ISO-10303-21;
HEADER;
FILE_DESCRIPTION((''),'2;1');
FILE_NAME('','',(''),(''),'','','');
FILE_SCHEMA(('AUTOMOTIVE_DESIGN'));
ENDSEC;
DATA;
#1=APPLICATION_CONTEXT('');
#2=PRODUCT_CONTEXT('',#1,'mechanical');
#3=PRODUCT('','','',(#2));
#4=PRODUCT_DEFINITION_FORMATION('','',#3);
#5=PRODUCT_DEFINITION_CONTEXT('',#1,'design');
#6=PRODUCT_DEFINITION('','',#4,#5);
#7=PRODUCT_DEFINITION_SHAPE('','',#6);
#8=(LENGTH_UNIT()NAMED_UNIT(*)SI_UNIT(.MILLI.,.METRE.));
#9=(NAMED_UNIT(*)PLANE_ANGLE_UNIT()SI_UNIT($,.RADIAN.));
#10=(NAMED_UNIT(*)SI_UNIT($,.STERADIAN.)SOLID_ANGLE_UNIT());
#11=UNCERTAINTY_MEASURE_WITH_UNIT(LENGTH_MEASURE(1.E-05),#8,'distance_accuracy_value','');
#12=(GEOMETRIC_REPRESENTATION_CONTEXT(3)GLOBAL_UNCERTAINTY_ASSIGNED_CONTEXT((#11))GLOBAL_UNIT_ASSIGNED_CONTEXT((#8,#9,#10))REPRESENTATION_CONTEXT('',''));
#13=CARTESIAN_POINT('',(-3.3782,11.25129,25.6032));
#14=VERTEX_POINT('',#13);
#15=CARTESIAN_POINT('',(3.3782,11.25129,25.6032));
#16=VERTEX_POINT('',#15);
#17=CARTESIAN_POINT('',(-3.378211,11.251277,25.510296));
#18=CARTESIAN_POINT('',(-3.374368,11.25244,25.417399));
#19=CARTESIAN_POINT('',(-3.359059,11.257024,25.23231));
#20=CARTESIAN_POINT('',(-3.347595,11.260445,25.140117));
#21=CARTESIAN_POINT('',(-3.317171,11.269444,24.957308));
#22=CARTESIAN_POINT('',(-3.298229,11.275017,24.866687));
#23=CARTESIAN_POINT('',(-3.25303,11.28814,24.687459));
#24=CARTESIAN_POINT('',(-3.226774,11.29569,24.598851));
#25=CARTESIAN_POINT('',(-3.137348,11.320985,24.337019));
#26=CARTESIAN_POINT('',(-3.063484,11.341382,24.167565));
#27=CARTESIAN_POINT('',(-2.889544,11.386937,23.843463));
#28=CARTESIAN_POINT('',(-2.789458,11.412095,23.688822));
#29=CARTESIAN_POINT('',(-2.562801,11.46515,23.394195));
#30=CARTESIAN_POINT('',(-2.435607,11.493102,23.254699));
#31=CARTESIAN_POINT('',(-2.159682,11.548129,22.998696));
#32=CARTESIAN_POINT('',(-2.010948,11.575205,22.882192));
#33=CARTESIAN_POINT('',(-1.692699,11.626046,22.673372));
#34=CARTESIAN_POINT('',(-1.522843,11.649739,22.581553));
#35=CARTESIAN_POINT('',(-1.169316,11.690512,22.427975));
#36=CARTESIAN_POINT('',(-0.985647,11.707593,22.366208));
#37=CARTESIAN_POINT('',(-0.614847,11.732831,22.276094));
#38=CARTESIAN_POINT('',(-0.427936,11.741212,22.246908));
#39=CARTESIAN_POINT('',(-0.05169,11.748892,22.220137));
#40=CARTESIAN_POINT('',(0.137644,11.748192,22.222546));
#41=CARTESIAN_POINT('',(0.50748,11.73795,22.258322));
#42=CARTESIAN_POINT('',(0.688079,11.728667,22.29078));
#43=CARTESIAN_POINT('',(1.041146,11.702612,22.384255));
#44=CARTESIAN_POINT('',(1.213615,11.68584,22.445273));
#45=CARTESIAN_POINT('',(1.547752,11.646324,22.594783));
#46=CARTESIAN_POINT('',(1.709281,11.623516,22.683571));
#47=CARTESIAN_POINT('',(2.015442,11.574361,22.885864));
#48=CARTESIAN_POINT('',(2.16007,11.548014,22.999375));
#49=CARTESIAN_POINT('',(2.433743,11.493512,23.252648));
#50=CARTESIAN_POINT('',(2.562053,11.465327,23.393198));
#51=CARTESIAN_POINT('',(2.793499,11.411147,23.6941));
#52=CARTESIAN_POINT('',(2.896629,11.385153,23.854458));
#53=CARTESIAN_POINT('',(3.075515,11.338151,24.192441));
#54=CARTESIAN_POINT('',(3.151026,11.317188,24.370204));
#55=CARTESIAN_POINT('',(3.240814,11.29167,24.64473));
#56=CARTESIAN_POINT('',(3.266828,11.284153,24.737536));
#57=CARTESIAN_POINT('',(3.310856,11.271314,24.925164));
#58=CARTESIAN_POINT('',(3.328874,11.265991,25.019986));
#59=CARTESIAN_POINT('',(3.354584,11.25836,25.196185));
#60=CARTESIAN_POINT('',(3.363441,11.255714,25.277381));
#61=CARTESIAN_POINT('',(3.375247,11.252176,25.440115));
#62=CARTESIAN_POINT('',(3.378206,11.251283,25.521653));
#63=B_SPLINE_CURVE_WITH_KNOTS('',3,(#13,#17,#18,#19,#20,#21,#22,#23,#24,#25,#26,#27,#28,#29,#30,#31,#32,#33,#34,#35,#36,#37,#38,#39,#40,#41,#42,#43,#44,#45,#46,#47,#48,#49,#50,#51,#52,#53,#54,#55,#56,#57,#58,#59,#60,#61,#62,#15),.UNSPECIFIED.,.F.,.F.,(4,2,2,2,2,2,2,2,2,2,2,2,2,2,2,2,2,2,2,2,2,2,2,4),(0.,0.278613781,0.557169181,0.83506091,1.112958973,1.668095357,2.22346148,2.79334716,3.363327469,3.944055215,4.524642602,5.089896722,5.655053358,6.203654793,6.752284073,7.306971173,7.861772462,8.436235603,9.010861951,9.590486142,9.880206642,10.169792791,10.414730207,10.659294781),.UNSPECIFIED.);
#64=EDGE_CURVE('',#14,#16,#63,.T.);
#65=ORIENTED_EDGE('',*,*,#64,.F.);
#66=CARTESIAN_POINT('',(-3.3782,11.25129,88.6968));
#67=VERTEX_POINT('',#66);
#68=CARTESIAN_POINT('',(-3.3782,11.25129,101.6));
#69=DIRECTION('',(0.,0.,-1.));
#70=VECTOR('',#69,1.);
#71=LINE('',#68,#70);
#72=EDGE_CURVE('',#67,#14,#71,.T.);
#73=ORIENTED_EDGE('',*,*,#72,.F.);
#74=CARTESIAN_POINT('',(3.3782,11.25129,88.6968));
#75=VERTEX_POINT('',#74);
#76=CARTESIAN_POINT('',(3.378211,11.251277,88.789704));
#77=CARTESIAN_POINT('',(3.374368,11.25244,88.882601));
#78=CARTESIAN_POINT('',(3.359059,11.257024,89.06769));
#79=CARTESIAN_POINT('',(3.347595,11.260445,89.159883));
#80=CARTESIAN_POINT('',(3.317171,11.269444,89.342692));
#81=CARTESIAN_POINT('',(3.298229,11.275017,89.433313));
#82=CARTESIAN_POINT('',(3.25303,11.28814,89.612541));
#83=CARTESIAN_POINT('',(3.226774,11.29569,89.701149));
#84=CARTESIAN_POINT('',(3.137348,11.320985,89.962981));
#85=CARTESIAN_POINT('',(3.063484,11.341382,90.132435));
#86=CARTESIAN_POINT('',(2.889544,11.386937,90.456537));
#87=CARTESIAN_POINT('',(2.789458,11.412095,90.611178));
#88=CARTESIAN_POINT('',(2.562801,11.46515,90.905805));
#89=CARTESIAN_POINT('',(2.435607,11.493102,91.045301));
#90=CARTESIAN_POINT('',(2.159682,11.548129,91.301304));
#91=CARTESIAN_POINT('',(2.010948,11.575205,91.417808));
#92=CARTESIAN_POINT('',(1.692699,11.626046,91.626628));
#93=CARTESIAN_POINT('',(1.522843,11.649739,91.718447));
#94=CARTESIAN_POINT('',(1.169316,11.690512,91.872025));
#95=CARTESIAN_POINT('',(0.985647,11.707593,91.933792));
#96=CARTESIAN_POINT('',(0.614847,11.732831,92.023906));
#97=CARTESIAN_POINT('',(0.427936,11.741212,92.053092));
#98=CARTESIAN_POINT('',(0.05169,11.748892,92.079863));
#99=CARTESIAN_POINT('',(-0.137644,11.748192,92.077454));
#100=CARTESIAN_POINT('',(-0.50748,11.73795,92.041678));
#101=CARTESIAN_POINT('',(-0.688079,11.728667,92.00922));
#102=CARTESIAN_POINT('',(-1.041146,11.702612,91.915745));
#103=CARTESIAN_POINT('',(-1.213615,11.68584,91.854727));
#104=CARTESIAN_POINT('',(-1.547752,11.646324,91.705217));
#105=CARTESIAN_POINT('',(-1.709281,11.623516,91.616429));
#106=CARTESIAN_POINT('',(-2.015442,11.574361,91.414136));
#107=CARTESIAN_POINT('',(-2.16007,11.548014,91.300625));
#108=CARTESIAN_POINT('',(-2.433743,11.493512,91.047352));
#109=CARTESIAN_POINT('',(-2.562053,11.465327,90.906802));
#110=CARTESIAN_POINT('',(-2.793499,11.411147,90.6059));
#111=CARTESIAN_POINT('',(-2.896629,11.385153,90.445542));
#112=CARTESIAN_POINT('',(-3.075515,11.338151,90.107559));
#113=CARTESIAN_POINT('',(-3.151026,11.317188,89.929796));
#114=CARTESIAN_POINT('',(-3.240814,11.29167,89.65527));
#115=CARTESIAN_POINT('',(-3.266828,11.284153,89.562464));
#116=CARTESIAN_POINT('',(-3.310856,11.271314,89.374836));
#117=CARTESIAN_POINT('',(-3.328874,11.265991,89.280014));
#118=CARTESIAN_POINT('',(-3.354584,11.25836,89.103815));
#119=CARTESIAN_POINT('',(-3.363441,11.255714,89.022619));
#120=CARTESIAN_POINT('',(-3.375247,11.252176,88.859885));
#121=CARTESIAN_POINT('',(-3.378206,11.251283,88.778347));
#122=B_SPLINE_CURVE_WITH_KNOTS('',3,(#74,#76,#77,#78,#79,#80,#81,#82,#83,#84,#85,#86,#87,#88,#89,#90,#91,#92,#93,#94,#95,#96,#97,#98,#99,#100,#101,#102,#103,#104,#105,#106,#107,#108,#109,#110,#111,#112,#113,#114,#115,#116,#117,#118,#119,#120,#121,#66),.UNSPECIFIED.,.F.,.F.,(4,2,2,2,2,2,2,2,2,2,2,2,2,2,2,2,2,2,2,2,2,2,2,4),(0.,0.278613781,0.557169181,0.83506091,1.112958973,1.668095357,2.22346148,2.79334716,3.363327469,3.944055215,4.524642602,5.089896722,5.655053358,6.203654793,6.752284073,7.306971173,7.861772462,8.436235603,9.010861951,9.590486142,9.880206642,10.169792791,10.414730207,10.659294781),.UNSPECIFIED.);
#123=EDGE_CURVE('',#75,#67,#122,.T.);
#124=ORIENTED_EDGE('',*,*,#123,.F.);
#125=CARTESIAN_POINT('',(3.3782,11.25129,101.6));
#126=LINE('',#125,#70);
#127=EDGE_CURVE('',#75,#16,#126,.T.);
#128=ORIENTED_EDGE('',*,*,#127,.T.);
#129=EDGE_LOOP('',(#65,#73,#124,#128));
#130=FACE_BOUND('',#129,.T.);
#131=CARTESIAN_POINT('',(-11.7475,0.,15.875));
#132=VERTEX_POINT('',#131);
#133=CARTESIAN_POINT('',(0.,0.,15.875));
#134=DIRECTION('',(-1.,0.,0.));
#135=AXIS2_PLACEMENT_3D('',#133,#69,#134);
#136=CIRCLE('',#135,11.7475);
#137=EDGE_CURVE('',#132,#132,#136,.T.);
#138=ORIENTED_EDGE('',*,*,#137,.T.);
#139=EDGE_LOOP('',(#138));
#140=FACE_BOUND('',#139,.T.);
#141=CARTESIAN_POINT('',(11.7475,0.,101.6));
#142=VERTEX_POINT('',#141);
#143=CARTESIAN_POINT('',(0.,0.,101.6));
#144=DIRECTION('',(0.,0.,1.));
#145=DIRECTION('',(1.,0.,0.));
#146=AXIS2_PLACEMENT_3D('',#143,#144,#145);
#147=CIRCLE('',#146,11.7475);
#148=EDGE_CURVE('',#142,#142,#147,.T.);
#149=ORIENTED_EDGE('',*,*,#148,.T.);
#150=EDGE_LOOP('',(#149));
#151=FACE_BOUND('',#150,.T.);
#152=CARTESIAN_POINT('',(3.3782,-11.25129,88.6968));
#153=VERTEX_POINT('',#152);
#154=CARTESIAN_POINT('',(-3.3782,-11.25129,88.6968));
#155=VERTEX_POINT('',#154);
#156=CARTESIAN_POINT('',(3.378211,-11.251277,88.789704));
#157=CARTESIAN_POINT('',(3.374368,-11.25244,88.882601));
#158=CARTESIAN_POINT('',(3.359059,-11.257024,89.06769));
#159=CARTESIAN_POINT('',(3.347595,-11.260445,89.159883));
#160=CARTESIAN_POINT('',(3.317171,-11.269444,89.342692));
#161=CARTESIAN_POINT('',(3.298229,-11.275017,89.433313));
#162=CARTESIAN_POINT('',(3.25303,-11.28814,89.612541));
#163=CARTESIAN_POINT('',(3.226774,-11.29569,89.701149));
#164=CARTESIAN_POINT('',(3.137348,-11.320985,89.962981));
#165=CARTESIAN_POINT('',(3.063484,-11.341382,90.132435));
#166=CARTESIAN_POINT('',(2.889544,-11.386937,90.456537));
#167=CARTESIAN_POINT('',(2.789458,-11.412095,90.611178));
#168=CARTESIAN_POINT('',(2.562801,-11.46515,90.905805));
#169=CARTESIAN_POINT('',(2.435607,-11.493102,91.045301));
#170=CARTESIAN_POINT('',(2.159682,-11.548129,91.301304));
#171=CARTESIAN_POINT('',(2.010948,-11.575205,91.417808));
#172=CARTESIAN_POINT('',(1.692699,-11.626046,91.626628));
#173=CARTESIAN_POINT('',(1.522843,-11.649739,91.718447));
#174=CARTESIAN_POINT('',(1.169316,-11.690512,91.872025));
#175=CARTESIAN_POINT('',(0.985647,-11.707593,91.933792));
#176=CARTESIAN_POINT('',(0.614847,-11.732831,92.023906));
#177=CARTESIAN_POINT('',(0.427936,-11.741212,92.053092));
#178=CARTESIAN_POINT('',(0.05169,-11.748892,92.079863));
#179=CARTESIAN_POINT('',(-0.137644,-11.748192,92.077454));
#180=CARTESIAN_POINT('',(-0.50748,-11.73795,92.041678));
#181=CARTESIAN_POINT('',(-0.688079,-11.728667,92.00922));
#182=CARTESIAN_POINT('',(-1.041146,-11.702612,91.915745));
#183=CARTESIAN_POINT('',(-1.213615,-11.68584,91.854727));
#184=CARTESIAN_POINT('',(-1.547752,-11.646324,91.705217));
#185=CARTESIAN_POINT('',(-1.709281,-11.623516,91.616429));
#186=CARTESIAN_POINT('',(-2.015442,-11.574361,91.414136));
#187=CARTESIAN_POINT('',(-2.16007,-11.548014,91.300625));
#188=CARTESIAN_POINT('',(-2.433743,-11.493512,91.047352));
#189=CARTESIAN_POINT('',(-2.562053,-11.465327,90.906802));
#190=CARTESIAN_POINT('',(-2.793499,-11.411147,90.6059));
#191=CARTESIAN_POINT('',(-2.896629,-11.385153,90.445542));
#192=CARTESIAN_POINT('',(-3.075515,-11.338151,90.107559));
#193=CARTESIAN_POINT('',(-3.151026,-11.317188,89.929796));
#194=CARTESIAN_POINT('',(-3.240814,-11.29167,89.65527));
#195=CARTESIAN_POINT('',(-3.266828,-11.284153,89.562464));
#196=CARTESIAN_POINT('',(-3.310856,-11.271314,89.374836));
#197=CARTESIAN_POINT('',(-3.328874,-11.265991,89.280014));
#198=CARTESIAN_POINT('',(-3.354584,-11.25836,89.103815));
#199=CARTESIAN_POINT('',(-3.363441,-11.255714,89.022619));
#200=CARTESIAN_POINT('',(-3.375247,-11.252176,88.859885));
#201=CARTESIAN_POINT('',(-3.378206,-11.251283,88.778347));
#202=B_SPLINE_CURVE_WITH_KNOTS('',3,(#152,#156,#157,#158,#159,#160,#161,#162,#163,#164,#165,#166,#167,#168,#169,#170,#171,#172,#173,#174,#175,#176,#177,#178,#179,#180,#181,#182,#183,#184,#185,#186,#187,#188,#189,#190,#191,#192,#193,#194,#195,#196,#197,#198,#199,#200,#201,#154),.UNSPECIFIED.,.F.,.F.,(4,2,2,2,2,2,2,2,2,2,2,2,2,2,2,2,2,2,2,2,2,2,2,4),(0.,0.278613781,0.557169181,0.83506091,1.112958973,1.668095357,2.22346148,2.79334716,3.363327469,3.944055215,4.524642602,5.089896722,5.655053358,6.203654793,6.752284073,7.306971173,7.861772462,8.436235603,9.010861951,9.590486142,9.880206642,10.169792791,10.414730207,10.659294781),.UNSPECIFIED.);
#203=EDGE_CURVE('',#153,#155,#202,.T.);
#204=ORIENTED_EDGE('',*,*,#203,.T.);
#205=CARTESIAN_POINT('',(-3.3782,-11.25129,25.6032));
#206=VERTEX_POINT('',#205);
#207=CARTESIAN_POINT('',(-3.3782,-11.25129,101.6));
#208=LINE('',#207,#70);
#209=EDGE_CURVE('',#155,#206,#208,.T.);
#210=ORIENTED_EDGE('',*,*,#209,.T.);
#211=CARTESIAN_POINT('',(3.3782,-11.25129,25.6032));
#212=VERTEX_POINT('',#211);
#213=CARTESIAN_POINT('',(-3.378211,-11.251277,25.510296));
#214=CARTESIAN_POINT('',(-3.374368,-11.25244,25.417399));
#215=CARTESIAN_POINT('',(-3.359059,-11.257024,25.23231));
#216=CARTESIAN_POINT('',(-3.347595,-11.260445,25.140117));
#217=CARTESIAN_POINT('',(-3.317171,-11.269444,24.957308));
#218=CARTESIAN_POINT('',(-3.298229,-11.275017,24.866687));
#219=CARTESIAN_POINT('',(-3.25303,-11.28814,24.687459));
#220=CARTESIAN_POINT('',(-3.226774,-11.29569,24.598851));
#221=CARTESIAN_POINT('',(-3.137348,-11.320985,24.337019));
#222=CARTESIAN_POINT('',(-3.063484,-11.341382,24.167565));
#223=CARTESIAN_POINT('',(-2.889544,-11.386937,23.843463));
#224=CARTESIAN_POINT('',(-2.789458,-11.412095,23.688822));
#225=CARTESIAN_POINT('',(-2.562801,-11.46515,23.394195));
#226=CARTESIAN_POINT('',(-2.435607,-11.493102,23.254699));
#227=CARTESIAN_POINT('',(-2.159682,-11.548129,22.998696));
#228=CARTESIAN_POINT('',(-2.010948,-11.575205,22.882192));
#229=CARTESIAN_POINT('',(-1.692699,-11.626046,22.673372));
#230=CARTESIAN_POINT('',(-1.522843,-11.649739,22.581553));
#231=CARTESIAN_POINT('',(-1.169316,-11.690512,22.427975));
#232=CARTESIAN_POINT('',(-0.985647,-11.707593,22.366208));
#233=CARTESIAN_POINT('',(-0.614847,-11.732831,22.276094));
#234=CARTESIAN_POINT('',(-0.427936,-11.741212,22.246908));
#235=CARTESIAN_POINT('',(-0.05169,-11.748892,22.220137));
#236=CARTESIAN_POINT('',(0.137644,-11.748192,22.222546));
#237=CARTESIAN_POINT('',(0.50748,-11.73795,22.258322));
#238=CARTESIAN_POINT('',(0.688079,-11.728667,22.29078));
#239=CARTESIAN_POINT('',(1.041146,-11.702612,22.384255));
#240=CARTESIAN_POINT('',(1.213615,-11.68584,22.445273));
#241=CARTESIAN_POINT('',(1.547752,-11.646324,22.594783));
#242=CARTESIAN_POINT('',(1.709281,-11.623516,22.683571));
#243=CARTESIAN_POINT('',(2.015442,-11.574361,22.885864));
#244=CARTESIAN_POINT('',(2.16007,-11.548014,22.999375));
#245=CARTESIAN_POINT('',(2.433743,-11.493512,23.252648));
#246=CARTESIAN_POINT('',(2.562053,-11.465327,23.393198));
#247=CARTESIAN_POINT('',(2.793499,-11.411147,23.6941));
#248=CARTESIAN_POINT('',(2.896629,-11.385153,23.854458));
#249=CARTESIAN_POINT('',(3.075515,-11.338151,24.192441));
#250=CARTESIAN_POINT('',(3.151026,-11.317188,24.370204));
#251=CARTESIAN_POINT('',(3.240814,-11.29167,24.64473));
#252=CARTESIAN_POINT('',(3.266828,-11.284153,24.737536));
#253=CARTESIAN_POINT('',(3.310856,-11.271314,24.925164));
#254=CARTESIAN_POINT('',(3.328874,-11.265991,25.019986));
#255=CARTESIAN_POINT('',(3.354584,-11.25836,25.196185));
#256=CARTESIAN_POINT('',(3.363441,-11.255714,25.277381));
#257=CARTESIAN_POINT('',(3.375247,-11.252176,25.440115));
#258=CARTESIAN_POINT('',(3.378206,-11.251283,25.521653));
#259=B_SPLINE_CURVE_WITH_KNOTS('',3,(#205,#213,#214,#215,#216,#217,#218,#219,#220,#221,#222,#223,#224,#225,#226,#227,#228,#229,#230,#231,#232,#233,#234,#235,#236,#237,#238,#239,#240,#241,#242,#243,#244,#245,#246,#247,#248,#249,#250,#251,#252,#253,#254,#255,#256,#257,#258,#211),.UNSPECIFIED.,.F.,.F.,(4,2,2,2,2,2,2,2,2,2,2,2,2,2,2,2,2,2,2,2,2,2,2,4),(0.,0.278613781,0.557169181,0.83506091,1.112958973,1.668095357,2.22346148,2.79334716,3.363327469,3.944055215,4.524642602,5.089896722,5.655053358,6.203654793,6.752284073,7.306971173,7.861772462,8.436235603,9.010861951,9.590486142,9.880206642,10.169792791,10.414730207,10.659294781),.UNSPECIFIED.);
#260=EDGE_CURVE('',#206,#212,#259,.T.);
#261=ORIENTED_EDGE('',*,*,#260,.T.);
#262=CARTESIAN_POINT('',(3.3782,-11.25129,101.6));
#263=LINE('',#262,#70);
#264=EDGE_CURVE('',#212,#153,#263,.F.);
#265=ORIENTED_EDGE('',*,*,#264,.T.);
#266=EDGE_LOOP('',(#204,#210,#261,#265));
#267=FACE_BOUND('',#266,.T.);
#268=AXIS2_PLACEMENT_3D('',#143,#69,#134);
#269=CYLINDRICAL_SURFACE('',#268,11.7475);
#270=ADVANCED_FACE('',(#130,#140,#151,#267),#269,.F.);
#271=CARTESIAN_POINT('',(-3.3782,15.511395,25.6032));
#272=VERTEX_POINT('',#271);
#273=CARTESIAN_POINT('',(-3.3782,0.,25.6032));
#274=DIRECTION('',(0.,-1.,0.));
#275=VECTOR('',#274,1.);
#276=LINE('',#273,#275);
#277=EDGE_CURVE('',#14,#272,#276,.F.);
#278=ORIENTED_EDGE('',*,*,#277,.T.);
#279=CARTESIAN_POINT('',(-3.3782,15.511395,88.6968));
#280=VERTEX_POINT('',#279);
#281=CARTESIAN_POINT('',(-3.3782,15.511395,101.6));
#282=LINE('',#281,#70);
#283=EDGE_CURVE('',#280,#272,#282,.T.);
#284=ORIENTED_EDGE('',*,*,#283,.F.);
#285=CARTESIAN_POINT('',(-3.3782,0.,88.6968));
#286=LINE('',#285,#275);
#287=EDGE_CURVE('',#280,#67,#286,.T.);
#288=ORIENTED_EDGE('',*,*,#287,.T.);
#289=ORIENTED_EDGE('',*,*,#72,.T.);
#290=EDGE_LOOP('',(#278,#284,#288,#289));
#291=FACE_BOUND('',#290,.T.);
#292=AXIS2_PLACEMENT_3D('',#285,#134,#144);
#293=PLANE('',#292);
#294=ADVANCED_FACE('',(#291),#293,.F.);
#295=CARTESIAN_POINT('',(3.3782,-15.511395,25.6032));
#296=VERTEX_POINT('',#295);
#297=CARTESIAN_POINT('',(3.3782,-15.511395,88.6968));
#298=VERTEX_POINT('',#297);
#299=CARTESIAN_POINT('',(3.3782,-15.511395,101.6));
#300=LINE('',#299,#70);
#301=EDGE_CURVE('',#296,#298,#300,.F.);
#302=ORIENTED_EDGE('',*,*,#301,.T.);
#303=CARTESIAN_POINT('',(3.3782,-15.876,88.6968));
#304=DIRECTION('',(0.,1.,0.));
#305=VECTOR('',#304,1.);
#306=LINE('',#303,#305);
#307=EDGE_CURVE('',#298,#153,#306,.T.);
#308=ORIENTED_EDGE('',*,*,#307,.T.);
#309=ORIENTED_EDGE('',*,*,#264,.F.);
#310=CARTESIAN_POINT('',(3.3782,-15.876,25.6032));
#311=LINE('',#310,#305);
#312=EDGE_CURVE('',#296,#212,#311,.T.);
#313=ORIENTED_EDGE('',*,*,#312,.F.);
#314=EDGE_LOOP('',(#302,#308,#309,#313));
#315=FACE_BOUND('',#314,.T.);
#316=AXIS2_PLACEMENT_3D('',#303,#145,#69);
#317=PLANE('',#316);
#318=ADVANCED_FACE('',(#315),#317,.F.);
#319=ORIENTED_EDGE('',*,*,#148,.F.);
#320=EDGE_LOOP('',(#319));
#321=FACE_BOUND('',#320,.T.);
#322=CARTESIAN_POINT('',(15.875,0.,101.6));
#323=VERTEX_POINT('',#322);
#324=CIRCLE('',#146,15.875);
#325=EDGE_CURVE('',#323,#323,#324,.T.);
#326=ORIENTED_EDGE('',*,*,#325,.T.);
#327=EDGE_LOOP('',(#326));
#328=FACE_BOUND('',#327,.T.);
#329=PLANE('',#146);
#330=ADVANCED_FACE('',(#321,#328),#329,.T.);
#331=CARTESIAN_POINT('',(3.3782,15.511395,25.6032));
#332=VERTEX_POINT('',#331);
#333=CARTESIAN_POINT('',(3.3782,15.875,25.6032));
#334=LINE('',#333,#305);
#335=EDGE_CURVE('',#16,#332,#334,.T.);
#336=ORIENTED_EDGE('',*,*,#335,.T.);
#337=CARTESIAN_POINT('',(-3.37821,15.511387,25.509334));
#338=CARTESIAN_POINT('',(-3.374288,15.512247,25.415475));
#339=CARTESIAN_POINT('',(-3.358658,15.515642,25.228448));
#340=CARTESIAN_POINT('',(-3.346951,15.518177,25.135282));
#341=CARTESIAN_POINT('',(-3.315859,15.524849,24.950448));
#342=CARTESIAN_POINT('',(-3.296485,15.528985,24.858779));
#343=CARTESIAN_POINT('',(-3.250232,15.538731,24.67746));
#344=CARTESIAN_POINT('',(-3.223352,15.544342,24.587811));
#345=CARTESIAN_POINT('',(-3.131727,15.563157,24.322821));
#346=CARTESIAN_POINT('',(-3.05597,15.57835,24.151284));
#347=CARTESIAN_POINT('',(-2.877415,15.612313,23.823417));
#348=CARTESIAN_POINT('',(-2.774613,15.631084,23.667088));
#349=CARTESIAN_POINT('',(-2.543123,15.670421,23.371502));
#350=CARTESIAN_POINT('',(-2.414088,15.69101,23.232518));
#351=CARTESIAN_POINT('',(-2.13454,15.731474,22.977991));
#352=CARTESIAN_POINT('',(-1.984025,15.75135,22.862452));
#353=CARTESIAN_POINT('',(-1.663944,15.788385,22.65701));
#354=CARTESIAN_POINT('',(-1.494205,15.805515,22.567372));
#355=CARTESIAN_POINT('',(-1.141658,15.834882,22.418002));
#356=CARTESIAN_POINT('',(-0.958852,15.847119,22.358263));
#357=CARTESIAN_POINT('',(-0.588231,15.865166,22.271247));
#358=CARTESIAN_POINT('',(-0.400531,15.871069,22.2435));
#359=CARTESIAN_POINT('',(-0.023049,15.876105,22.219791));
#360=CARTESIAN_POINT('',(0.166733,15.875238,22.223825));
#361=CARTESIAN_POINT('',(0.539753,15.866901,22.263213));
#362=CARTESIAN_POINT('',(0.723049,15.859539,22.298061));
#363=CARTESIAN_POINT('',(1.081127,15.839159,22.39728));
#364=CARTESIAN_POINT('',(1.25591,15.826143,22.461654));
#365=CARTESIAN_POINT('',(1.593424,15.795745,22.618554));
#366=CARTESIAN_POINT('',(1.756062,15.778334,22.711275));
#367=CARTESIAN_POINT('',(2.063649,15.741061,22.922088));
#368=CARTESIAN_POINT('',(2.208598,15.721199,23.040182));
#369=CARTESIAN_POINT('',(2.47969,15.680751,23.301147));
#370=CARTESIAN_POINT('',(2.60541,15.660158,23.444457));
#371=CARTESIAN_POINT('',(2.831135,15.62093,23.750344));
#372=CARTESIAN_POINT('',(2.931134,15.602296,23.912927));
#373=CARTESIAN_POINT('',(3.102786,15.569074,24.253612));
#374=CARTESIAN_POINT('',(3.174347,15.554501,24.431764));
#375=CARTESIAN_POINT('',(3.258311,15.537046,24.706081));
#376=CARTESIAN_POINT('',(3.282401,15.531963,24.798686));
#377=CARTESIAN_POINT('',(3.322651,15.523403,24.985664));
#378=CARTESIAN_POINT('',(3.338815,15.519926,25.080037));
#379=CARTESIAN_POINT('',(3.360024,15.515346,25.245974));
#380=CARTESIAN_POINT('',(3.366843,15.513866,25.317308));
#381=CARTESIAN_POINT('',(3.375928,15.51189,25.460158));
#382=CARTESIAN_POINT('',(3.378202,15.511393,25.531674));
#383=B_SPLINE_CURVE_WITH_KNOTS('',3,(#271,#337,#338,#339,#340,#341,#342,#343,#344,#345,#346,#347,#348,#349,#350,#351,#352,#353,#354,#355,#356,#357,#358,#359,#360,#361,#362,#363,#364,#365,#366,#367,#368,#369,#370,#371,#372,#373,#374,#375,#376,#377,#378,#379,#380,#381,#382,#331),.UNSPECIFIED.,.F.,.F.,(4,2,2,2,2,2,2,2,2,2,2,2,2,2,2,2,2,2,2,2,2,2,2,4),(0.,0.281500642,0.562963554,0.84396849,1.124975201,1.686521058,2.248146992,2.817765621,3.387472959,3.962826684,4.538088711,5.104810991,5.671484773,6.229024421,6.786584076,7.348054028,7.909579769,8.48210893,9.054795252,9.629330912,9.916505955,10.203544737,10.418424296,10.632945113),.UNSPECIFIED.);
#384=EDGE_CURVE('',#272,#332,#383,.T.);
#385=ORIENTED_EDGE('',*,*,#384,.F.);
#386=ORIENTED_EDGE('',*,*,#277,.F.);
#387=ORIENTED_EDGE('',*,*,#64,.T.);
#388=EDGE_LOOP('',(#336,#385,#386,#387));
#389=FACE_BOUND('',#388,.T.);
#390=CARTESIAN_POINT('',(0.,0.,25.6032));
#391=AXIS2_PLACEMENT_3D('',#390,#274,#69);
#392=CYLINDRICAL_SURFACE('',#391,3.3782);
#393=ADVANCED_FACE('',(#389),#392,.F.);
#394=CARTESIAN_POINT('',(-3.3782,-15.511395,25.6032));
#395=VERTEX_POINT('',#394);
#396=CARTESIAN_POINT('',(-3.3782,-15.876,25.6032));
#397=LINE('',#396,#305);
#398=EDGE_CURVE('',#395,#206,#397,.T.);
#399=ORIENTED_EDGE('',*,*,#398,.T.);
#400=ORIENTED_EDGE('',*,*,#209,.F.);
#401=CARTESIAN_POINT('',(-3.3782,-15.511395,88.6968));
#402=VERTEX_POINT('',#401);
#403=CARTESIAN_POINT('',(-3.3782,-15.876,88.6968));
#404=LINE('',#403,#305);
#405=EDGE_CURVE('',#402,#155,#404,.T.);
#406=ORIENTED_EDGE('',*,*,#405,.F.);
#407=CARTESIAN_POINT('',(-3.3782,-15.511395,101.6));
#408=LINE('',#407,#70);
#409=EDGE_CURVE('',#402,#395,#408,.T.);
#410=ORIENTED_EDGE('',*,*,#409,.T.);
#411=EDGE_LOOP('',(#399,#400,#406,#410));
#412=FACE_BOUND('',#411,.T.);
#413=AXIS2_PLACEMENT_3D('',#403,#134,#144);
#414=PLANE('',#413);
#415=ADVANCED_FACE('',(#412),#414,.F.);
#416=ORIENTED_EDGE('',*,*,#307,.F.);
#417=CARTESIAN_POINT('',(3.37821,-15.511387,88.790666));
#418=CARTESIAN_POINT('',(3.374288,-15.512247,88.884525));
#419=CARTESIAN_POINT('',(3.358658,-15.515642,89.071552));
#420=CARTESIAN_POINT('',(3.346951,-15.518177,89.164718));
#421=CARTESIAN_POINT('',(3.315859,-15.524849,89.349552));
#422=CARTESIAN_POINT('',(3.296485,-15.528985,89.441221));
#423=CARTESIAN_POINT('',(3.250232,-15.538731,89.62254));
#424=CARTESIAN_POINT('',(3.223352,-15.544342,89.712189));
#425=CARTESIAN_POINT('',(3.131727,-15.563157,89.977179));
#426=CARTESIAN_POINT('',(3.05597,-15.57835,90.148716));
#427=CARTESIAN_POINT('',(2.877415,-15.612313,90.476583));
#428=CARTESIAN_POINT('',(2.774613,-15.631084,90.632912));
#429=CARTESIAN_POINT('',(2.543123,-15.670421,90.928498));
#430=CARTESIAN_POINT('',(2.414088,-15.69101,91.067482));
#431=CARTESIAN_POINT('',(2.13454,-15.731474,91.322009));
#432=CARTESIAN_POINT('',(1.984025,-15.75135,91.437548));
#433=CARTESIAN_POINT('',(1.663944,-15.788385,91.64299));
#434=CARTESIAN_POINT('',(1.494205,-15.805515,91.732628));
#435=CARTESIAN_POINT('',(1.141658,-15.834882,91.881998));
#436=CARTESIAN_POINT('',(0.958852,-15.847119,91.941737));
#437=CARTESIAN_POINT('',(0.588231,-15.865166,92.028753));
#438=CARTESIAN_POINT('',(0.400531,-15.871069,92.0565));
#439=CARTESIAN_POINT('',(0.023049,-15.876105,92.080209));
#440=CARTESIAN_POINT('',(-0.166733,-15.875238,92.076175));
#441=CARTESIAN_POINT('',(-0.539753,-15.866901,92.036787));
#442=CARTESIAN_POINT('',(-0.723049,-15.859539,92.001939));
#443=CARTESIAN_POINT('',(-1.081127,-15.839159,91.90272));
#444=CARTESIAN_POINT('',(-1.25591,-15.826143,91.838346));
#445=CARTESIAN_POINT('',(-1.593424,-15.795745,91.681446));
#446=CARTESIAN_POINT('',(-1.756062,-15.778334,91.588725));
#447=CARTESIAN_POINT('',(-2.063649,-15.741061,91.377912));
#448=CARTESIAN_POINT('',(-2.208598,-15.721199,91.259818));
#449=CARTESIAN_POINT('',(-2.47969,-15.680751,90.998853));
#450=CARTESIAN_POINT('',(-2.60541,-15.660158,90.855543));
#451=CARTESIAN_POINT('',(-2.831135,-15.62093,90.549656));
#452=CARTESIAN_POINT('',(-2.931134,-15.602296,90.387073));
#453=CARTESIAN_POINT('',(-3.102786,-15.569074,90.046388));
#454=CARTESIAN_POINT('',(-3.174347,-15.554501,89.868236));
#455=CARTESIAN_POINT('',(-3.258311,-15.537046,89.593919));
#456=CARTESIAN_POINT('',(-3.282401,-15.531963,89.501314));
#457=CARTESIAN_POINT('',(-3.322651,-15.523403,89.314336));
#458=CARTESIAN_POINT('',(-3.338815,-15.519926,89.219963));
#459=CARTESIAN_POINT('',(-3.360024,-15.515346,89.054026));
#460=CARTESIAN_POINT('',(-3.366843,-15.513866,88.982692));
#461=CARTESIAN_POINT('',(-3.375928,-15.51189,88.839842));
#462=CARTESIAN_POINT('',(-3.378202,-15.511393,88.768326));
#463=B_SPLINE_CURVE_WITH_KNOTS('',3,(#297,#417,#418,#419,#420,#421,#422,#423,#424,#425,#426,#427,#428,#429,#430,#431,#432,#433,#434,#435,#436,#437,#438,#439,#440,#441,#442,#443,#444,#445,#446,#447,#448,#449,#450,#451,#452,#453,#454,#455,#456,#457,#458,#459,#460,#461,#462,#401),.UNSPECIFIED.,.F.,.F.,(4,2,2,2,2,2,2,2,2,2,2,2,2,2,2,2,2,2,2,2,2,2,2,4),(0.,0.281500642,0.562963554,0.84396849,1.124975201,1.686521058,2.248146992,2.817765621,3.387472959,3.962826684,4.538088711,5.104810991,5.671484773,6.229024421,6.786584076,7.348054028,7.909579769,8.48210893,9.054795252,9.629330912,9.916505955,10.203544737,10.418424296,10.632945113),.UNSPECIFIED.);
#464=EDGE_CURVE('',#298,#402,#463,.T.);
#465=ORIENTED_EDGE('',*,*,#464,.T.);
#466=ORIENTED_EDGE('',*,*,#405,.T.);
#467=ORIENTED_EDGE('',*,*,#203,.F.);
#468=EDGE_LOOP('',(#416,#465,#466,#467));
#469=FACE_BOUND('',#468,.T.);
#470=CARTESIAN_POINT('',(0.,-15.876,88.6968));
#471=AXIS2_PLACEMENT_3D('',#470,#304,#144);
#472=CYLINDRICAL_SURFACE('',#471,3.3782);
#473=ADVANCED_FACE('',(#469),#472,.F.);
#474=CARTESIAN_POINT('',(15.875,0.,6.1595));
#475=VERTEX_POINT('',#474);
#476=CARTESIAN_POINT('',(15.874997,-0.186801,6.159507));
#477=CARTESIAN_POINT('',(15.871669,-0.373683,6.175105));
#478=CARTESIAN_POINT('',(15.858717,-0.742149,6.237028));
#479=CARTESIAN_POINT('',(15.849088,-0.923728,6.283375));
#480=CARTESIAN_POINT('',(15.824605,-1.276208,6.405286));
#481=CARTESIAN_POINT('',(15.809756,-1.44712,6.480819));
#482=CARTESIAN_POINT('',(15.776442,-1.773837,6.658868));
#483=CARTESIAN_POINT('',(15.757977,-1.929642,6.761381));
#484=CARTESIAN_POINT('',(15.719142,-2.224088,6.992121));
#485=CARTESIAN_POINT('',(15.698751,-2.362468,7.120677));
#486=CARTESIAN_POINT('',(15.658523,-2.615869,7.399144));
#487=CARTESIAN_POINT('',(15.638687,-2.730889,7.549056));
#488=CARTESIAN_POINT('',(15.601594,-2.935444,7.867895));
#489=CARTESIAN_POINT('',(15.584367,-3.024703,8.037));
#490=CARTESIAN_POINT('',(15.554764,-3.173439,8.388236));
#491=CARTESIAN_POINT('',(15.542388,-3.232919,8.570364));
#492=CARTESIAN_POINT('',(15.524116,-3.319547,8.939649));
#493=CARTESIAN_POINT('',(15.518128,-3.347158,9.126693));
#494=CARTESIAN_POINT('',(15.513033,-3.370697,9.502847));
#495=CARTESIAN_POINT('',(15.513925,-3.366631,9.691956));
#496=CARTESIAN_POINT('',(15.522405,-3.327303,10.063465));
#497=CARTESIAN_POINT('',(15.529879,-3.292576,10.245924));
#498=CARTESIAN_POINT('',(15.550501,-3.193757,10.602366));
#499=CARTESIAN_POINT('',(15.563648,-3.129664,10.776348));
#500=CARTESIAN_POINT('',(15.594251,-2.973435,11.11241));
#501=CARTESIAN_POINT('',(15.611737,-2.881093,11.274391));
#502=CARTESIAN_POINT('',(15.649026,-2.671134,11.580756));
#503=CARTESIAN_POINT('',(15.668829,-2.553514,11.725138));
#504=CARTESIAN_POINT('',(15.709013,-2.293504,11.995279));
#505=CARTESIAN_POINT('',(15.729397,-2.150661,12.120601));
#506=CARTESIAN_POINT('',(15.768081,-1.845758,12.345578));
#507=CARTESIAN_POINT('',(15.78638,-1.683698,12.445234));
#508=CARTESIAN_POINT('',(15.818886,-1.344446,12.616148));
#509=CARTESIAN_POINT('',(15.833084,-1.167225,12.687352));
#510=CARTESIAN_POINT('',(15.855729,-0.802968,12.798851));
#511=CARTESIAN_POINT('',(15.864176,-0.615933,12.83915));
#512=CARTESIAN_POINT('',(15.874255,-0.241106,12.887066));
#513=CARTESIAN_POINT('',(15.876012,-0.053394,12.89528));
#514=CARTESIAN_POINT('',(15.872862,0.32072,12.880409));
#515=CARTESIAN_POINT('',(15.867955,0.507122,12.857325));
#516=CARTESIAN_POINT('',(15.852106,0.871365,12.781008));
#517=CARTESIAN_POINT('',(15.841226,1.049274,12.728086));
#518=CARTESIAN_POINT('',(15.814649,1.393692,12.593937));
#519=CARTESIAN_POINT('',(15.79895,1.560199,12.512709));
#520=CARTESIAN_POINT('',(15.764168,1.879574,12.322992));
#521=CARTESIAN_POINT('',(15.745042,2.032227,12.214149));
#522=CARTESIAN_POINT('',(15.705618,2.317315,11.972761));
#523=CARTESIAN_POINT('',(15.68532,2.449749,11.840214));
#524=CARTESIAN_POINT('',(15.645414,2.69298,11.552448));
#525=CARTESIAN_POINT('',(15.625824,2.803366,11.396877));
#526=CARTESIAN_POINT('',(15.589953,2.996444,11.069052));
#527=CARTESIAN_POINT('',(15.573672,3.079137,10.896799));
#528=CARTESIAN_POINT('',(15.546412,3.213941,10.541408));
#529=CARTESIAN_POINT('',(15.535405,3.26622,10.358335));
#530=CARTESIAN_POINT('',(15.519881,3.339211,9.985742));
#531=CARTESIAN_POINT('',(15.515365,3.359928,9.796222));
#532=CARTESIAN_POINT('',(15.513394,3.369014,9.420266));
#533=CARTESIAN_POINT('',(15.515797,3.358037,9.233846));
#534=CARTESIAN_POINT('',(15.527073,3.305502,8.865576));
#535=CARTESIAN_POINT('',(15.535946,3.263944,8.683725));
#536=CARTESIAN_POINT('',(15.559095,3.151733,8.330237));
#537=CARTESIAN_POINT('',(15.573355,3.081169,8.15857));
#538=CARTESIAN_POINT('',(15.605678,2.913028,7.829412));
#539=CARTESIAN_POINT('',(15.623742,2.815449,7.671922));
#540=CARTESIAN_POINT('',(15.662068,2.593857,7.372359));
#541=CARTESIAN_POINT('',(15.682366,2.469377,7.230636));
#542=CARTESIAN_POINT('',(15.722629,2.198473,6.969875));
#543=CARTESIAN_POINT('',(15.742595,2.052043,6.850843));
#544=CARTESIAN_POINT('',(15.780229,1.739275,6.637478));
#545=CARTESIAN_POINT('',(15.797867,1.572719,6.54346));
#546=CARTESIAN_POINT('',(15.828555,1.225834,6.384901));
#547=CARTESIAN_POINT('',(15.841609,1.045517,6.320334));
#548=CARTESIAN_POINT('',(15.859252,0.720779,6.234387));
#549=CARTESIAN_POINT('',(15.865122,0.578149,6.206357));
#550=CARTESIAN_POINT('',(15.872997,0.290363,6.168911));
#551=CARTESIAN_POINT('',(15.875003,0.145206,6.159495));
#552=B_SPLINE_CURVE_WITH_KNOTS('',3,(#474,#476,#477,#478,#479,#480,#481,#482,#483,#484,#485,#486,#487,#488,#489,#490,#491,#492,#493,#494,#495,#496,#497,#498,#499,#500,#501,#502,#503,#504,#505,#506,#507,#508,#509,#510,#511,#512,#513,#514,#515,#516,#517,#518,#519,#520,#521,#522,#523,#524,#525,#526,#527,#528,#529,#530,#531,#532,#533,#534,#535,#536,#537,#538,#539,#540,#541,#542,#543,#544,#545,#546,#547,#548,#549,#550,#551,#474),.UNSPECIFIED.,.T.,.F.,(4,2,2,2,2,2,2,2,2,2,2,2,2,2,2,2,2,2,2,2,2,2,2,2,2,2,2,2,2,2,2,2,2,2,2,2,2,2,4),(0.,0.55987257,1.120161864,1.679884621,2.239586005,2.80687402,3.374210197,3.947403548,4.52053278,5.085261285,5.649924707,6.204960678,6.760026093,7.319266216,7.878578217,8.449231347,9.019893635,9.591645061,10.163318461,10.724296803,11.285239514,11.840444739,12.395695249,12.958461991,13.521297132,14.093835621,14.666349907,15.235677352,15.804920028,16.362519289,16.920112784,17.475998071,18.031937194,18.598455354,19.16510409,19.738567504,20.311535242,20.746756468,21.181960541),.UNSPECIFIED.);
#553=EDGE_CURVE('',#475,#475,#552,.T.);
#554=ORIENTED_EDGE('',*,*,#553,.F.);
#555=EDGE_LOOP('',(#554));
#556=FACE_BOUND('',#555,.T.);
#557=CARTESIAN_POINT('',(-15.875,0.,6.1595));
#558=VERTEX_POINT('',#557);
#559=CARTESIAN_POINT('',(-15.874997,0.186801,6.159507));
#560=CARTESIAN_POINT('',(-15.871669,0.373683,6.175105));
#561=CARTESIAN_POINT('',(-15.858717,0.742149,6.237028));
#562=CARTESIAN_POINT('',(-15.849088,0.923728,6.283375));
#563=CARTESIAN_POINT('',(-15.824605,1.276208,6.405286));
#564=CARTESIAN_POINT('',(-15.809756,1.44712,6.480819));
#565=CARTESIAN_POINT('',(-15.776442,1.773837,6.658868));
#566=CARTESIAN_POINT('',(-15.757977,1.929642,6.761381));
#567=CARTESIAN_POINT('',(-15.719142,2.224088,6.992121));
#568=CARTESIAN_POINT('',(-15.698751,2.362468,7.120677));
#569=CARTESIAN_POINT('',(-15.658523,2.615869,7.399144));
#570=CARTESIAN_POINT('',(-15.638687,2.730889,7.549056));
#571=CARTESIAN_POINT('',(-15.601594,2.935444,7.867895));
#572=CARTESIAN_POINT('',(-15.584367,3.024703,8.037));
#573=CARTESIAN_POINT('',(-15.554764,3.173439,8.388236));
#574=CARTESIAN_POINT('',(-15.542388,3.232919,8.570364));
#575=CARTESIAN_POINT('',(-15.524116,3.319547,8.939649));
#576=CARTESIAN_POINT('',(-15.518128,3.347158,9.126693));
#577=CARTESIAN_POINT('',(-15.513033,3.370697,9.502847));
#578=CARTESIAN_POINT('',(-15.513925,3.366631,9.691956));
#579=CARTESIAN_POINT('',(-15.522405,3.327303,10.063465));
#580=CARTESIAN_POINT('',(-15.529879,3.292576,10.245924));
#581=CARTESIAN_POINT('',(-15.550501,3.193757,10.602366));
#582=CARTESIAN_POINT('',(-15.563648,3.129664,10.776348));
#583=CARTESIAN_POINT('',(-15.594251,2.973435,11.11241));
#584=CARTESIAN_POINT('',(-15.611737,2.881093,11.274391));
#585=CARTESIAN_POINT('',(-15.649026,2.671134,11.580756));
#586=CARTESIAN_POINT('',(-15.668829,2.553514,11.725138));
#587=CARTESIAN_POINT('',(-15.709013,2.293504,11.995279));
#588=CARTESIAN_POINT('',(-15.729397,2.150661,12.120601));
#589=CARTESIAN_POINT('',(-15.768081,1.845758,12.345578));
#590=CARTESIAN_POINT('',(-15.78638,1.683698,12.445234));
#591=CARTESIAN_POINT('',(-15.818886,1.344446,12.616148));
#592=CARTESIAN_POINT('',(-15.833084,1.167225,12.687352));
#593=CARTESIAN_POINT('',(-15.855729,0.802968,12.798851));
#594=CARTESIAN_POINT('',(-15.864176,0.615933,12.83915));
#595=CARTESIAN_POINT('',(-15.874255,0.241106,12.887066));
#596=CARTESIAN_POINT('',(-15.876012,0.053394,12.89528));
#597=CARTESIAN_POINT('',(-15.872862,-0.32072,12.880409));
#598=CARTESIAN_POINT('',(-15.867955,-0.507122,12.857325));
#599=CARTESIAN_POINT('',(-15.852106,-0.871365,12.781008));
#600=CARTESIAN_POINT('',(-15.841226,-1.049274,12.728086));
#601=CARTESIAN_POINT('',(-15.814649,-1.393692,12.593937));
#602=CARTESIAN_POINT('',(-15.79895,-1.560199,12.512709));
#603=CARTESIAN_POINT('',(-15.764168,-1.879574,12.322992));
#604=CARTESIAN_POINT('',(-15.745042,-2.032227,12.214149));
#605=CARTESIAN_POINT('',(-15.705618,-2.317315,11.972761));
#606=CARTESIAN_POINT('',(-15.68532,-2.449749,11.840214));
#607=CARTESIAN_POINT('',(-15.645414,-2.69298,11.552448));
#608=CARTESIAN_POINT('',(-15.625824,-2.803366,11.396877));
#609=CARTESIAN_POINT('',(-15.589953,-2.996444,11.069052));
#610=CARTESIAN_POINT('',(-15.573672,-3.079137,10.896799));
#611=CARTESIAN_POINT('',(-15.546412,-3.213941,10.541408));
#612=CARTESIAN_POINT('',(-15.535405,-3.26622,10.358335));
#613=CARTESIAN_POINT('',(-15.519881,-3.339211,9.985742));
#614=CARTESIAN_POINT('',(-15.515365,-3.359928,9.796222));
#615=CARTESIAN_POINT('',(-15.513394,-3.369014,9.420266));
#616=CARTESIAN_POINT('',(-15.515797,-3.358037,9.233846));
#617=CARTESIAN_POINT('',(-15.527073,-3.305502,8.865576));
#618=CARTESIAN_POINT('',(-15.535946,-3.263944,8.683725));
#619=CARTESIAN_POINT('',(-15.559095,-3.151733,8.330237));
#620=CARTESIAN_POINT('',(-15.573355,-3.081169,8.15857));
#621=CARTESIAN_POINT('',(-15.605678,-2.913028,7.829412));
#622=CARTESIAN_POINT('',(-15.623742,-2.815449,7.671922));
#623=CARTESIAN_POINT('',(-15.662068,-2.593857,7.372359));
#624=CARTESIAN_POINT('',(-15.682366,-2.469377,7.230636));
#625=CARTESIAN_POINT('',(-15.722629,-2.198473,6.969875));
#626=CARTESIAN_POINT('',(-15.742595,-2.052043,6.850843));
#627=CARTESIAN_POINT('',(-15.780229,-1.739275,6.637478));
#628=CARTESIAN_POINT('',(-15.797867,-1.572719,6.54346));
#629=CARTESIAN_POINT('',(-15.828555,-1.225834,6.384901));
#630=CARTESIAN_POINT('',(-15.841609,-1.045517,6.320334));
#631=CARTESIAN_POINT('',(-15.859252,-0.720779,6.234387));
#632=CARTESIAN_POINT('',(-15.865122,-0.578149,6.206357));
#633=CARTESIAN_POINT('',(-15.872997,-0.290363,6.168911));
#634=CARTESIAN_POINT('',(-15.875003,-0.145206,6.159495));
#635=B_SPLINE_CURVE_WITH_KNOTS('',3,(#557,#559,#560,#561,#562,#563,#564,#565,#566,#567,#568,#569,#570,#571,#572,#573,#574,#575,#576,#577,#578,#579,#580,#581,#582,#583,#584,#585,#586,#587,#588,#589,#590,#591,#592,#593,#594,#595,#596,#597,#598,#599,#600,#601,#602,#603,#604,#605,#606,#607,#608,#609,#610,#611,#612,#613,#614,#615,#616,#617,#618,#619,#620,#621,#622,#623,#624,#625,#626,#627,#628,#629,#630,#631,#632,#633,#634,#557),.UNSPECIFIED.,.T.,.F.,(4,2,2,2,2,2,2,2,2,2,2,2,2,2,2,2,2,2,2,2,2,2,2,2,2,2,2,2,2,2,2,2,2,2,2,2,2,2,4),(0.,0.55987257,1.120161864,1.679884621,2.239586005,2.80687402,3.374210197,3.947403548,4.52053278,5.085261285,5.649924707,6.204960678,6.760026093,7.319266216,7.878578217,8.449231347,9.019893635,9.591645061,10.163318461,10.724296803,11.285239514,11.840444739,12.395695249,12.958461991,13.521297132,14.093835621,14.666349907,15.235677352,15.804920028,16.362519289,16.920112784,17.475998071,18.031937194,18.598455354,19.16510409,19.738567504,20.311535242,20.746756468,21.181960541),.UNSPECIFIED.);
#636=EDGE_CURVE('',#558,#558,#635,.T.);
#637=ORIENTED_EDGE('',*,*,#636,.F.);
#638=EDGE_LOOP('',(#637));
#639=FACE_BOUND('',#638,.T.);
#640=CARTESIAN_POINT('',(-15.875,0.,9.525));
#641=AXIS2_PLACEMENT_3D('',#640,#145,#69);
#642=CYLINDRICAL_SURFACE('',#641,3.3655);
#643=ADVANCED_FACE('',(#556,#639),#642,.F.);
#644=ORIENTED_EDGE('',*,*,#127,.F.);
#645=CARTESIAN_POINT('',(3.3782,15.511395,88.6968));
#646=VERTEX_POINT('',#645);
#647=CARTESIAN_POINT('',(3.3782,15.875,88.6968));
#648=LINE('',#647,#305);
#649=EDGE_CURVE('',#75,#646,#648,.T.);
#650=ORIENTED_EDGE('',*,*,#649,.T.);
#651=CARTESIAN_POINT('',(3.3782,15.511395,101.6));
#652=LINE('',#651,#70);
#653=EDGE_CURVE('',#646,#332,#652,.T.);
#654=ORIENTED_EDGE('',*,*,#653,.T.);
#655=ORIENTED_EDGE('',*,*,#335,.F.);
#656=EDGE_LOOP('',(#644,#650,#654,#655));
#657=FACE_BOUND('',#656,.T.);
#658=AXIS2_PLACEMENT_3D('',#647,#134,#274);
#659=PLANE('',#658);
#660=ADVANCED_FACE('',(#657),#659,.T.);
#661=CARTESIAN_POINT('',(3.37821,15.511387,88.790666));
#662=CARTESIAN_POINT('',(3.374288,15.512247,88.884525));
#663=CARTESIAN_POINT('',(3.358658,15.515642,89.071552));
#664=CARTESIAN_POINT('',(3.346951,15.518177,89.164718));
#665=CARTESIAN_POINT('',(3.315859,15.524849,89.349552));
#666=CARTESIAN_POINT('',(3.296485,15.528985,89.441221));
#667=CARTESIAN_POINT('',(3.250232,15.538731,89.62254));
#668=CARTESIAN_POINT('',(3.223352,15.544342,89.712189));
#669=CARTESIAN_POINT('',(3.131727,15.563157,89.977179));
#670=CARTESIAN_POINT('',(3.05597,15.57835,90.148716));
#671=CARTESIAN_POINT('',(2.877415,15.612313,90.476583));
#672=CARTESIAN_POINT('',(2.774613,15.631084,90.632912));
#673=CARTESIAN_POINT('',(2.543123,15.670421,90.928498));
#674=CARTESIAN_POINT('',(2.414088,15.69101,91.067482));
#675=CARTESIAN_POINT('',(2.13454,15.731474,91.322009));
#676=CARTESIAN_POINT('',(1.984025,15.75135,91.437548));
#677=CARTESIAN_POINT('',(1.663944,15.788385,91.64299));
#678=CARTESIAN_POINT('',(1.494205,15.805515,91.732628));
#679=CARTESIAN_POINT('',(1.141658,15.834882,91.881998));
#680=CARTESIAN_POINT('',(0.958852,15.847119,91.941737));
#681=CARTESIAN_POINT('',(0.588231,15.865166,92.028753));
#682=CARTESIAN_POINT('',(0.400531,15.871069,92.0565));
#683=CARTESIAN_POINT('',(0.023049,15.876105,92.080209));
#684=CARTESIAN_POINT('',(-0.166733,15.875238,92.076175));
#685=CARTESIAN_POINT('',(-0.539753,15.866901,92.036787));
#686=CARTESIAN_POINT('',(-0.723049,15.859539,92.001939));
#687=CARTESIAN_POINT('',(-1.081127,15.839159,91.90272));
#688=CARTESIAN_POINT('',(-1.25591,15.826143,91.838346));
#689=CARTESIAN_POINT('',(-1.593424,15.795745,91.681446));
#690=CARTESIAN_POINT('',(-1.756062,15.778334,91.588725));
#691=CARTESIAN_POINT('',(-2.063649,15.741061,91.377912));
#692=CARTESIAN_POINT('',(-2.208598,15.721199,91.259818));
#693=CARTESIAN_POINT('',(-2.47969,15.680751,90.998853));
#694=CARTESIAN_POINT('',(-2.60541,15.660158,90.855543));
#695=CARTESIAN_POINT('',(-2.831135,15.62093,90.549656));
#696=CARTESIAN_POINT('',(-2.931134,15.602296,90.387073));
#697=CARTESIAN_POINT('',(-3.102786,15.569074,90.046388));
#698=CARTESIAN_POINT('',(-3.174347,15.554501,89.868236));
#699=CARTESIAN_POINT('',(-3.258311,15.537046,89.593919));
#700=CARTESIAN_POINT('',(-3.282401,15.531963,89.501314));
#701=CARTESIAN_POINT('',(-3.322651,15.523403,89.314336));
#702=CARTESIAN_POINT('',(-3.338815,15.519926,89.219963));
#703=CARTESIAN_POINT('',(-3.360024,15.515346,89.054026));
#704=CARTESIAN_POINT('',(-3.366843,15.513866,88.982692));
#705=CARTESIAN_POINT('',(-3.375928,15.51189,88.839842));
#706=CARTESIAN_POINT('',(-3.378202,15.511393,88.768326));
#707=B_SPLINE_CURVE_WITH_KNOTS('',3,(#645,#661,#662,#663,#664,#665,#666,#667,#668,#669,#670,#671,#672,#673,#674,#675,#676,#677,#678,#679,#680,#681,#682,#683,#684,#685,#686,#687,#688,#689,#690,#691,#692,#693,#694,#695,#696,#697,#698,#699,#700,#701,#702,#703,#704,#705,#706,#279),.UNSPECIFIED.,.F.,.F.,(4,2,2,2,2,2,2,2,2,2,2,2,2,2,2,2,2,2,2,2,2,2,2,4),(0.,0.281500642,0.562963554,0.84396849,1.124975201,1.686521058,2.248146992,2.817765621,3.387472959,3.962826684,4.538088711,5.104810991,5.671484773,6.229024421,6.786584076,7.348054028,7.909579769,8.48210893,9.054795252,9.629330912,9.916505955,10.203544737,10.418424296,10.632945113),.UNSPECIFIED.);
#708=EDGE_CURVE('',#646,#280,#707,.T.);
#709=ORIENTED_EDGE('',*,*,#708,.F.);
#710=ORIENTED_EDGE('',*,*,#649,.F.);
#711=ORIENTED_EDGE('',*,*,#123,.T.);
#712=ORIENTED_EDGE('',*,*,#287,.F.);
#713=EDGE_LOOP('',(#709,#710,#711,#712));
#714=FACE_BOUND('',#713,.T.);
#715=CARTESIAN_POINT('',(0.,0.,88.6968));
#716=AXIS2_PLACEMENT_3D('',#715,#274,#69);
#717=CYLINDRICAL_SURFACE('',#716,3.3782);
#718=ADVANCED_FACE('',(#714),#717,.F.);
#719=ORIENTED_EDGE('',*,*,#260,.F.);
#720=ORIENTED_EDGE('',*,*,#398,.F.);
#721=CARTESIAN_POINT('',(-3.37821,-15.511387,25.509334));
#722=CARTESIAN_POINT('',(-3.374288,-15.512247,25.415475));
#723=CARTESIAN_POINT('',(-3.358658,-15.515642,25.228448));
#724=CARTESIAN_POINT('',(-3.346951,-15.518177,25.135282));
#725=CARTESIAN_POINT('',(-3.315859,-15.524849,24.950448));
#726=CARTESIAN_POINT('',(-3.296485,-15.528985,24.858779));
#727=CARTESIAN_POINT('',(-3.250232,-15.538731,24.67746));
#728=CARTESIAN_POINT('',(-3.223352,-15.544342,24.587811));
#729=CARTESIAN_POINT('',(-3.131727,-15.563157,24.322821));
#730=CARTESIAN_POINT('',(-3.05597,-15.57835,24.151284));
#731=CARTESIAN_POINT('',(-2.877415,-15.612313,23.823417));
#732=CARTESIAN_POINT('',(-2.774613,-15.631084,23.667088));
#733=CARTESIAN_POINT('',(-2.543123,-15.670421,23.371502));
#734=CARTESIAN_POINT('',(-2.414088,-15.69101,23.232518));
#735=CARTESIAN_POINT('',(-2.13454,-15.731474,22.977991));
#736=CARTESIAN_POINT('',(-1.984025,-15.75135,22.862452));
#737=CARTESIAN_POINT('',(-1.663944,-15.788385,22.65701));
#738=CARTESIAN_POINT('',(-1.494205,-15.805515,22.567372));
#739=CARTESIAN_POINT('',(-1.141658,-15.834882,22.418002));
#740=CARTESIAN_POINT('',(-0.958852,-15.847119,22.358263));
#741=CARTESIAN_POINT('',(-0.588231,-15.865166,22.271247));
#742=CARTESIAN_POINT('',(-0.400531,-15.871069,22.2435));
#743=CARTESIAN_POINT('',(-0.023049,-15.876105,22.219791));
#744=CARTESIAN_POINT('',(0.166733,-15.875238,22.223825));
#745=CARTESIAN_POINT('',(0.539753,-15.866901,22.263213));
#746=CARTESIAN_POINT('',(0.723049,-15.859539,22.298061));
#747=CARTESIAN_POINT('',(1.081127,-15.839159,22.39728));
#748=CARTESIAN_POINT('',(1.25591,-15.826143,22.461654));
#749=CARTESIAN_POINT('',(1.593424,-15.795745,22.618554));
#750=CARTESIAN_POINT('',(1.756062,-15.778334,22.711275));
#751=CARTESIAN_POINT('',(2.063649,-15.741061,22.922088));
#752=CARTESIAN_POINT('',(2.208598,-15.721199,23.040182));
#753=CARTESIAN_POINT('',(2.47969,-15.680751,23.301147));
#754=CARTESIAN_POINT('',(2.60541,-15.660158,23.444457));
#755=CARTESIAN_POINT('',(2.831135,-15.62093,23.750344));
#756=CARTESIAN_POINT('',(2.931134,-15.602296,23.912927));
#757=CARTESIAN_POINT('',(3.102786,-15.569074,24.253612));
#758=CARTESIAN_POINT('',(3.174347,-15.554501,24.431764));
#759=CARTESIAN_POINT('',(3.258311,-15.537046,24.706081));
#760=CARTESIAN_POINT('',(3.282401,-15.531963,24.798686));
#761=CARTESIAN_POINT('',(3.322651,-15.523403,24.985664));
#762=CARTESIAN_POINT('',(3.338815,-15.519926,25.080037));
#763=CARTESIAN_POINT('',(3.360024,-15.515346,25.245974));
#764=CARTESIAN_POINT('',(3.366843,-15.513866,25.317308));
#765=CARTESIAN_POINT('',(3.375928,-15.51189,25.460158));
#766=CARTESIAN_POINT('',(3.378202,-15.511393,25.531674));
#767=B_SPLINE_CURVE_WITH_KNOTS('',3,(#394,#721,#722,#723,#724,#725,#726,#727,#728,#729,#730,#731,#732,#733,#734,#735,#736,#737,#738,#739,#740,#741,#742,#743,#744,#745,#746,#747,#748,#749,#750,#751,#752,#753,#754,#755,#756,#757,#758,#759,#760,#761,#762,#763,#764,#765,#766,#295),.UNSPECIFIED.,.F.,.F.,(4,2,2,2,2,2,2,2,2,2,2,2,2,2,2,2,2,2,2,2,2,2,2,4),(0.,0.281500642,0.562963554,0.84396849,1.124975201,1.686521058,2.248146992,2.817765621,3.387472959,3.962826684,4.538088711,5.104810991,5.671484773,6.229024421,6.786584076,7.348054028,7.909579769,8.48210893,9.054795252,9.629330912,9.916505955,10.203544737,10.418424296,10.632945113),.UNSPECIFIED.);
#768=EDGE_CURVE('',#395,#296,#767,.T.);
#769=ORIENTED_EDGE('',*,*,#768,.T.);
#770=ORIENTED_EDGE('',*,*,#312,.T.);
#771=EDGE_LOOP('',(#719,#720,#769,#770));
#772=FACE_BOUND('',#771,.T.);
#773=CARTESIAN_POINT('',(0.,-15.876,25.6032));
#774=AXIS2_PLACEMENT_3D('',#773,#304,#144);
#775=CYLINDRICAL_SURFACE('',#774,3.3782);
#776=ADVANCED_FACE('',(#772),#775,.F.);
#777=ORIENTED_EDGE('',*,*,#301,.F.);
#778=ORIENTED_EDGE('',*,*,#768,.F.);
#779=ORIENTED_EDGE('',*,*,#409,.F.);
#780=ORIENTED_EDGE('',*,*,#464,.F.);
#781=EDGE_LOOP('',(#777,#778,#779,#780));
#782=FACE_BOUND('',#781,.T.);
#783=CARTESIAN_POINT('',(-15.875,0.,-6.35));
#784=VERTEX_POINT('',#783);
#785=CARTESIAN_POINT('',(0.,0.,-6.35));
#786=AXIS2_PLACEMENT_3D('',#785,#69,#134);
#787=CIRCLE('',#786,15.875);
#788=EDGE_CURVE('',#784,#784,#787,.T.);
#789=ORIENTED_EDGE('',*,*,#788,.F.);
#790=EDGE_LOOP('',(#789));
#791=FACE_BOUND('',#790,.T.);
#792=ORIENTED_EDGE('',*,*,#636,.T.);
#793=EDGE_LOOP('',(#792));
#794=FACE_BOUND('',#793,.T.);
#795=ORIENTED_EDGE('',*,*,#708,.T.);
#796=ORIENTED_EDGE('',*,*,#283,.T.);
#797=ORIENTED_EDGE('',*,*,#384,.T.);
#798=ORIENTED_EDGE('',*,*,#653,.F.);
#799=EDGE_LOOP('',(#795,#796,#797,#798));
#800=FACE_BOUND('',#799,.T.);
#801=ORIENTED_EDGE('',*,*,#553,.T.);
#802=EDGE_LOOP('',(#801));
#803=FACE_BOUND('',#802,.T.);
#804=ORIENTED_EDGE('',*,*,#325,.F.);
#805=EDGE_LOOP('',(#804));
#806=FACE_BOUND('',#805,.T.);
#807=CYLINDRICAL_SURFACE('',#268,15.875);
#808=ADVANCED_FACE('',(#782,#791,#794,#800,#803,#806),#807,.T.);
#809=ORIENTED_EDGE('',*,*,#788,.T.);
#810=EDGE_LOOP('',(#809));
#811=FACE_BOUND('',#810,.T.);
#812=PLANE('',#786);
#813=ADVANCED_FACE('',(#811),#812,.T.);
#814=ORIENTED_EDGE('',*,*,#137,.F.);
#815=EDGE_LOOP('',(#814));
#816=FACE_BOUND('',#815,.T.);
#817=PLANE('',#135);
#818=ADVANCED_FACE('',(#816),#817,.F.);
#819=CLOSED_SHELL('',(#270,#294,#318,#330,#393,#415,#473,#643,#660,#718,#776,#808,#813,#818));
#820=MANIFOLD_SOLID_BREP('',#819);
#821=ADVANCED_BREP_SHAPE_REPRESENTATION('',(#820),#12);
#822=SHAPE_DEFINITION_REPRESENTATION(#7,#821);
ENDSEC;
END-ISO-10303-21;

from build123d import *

# Parameters (mm, degrees)
SKETCH1_R                   = 15.875
SKETCH1_R_2                 = 11.7475
BOSS_EXTRUDE1_DEPTH         = 101.6
F_1_4_START                 = 10
F_1_4_CLEARANCE_SLOT1_DEPTH = 7
CUT_EXTRUDE1_REACH          = 106.051
CUT_EXTRUDE1_END_RADIUS     = 15.875
SKETCH7_R                   = 15.875
BOSS_EXTRUDE2_DEPTH         = 15.875
CUT_EXTRUDE3_DEPTH          = 105.050907141
CUT_EXTRUDE3_DEPTH_BACK     = 105.050907141
SKETCH6_R                   = 3.3655
BOSS_EXTRUDE3_START         = 6.35
SKETCH8_R                   = 15.875
BOSS_EXTRUDE3_DEPTH         = 6.35


with BuildPart() as part:
    # Sketch1 → Boss-Extrude1 (new body)
    with BuildSketch(Plane.XY):
        Circle(SKETCH1_R)
        Circle(SKETCH1_R_2, mode=Mode.SUBTRACT)
    extrude(amount=BOSS_EXTRUDE1_DEPTH)

    # 1/4 Clearance Slot1: read off the stored shape, not the designer's step
    # 1/4 Clearance Slot1 outline → 1/4 Clearance Slot1 (cut)
    with BuildSketch(Plane(origin=(0, 0, 0), x_dir=(1, 0, 0), z_dir=(0, 1, 0)).offset(F_1_4_START)):
        with BuildLine():
            Line((3.3782, -88.6968), (3.3782, -25.6032))
            ThreePointArc((3.3782, -25.6032), (0, -22.225), (-3.3782, -25.6032))
            Line((-3.3782, -25.6032), (-3.3782, -88.6968))
            ThreePointArc((-3.3782, -88.6968), (0, -92.075), (3.3782, -88.6968))
        make_face()
    extrude(amount=F_1_4_CLEARANCE_SLOT1_DEPTH, mode=Mode.SUBTRACT)

    # Cut-Extrude1: up to this cylinder (the profile starts inside it)
    cut_extrude1_end = Plane(origin=(0, 0, 57.15), z_dir=(0, 0, -1)) * Cylinder(CUT_EXTRUDE1_END_RADIUS, 244.852, mode=Mode.PRIVATE)
    # Sketch4 → Cut-Extrude1 (cut, up to the surface)
    with BuildSketch(Plane(origin=(0, 0, 0), x_dir=(1, 0, 0), z_dir=(0, 1, 0)), mode=Mode.PRIVATE) as cut_extrude1_sk1:
        with BuildLine():
            Line((-3.3782, -88.6968), (-3.3782, -25.6032))
            ThreePointArc((-3.3782, -25.6032), (0, -22.225), (3.3782, -25.6032))
            Line((3.3782, -25.6032), (3.3782, -88.6968))
            ThreePointArc((3.3782, -88.6968), (0, -92.075), (-3.3782, -88.6968))
        make_face()
    cut_extrude1_tool1 = extrude(cut_extrude1_sk1.sketch, amount=-CUT_EXTRUDE1_REACH, mode=Mode.PRIVATE) & cut_extrude1_end
    add(cut_extrude1_tool1.solids().sort_by_distance((0, 0, 57.15))[0], mode=Mode.SUBTRACT)

    # Sketch7 → Boss-Extrude2 (add)
    with BuildSketch(Plane(origin=(0, 0, 0), x_dir=(-1, 0, 0), z_dir=(0, 0, -1))):
        with Locations(Location((0, 0, 0), (0, 0, 180))):
            Circle(SKETCH7_R)
    extrude(amount=-BOSS_EXTRUDE2_DEPTH)

    # Sketch6 → Cut-Extrude3 (cut, two sides: drawn at the far end of the back side and taken through both)
    with BuildSketch(Plane(origin=(0, 0, 0), x_dir=(0, 0, -1), z_dir=(1, 0, 0)).offset(-CUT_EXTRUDE3_DEPTH_BACK)):
        with Locations((-9.525, 0)):
            Circle(SKETCH6_R)
    extrude(amount=CUT_EXTRUDE3_DEPTH + CUT_EXTRUDE3_DEPTH_BACK, mode=Mode.SUBTRACT)

    # Sketch8 → Boss-Extrude3 (add)
    with BuildSketch(Plane(origin=(0, 0, 0), x_dir=(-1, 0, 0), z_dir=(0, 0, -1)).offset(BOSS_EXTRUDE3_START)):
        Circle(SKETCH8_R)
    extrude(amount=-BOSS_EXTRUDE3_DEPTH)


solid = part.part
